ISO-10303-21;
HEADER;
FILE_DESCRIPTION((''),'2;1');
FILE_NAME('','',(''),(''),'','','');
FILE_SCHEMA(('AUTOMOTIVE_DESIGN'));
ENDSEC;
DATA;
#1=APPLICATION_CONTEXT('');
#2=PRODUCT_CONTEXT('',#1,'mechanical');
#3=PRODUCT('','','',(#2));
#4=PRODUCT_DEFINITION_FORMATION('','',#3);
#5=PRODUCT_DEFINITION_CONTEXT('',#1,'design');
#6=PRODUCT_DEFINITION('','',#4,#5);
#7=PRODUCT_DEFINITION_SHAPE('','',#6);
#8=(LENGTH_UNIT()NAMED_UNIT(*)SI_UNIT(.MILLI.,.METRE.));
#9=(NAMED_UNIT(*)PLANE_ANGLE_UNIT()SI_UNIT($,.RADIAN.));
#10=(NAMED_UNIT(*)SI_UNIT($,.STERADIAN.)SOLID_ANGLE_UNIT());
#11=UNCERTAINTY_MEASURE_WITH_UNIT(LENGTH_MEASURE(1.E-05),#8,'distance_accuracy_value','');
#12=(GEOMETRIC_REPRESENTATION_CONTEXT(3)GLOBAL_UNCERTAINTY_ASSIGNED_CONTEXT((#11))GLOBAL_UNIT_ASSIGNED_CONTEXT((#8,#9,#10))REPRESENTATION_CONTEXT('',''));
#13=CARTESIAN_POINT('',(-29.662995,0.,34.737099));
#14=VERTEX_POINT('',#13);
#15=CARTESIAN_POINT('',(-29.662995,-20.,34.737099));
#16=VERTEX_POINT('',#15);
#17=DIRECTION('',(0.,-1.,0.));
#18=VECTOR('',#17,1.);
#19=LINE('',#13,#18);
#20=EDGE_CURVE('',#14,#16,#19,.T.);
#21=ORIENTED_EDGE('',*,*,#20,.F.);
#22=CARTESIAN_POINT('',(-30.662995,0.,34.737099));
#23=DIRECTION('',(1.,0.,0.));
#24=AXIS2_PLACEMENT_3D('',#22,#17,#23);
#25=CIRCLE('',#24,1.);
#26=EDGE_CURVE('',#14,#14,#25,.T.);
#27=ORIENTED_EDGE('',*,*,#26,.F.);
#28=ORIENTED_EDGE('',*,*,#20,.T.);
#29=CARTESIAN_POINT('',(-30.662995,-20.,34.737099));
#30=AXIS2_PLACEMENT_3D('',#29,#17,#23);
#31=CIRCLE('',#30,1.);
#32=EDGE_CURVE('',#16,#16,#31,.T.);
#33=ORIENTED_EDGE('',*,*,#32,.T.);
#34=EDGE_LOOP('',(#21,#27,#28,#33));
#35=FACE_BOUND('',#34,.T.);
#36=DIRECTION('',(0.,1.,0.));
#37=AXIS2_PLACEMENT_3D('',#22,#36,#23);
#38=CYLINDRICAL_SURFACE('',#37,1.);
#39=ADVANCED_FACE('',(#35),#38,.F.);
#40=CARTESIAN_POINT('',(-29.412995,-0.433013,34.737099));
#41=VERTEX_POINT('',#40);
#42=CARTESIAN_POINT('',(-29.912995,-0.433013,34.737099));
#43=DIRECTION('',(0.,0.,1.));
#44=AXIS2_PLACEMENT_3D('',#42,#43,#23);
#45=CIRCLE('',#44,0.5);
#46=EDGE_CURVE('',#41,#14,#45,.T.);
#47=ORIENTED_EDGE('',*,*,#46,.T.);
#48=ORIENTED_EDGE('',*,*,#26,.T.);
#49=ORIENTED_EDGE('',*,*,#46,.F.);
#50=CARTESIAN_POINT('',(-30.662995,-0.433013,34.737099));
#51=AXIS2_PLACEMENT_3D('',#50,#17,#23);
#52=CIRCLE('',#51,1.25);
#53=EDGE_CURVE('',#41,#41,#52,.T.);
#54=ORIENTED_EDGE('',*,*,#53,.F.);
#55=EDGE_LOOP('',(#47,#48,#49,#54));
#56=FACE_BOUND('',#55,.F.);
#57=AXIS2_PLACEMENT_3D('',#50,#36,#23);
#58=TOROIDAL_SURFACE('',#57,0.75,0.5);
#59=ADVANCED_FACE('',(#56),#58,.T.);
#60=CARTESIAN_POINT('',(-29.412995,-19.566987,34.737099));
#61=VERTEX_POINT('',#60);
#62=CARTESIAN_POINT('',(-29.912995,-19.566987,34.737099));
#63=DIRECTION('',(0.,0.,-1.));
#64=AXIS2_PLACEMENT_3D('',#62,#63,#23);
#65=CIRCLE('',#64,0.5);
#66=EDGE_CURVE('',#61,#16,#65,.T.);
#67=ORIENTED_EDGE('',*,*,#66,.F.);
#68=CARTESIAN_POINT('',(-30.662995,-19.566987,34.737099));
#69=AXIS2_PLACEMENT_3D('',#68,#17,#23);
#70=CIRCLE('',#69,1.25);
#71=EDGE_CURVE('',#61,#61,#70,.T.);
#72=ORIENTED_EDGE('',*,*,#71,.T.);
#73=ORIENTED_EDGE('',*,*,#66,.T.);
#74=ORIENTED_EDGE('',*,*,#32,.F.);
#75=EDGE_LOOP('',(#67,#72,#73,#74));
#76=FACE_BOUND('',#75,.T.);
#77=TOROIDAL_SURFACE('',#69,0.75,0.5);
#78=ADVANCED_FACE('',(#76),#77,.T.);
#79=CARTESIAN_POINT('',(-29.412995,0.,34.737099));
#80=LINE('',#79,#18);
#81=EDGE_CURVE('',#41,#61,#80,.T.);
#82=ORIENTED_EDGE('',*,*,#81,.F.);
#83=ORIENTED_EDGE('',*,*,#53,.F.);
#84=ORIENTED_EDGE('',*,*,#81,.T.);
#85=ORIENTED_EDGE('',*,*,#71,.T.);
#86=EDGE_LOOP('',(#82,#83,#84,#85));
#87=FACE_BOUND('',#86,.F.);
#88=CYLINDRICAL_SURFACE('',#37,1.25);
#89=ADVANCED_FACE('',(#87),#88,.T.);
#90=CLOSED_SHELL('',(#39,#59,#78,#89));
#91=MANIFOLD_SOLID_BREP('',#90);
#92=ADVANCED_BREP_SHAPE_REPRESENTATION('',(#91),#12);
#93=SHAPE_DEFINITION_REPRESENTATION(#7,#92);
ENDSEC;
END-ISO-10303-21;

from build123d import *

# Parameters (mm, degrees)
F0_R     = 1.25
F0_R_2   = 1
F1_DEPTH = 20


# Not quite as in the source:
# - a fillet or chamfer that OpenCascade refuses, or shapes differently, is made with other operations: its cross-section is extruded or revolved along the edge and cut away or added


with BuildPart() as f1:
    # F0 (on Front) → F1 (new body)
    with BuildSketch(Plane.XZ):
        with Locations((-30.6629948318, 34.7370989621)):
            Circle(F0_R)
        with Locations((-30.6629948318, 34.7370989621)):
            Circle(F0_R_2, mode=Mode.SUBTRACT)
    extrude(amount=F1_DEPTH)

    # F2: fillet of radius 0.5 on 1 edges, made by hand

    # F2_s1 → F2_t2 (revolve, cut)
    with BuildSketch(Plane.XY.offset(34.7370989621)):
        with BuildLine():
            ThreePointArc((-29.4129948318, -19.5669872981), (-29.4799821299, -19.8169872981), (-29.6629948318, -20))
            Line((-29.6629948318, -20), (-29.4129948318, -20))
            Line((-29.4129948318, -20), (-29.4129948318, -19.5669872981))
        make_face()
    revolve(axis=Axis((-30.6629948318, -20, 34.7370989621), (0, -1, 0)), mode=Mode.SUBTRACT)

    # F3: fillet of radius 0.5 on 1 edges, made by hand

    # F3_s1 → F3_t2 (revolve, cut)
    with BuildSketch(Plane.XY.offset(34.7370989621)):
        with BuildLine():
            ThreePointArc((-29.4129948318, -0.4330127019), (-29.4799821299, -0.1830127019), (-29.6629948318, 0))
            Line((-29.6629948318, 0), (-29.4129948318, 0))
            Line((-29.4129948318, 0), (-29.4129948318, -0.4330127019))
        make_face()
    revolve(axis=Axis((-30.6629948318, 0, 34.7370989621), (0, -1, 0)), mode=Mode.SUBTRACT)


solid = f1.part
